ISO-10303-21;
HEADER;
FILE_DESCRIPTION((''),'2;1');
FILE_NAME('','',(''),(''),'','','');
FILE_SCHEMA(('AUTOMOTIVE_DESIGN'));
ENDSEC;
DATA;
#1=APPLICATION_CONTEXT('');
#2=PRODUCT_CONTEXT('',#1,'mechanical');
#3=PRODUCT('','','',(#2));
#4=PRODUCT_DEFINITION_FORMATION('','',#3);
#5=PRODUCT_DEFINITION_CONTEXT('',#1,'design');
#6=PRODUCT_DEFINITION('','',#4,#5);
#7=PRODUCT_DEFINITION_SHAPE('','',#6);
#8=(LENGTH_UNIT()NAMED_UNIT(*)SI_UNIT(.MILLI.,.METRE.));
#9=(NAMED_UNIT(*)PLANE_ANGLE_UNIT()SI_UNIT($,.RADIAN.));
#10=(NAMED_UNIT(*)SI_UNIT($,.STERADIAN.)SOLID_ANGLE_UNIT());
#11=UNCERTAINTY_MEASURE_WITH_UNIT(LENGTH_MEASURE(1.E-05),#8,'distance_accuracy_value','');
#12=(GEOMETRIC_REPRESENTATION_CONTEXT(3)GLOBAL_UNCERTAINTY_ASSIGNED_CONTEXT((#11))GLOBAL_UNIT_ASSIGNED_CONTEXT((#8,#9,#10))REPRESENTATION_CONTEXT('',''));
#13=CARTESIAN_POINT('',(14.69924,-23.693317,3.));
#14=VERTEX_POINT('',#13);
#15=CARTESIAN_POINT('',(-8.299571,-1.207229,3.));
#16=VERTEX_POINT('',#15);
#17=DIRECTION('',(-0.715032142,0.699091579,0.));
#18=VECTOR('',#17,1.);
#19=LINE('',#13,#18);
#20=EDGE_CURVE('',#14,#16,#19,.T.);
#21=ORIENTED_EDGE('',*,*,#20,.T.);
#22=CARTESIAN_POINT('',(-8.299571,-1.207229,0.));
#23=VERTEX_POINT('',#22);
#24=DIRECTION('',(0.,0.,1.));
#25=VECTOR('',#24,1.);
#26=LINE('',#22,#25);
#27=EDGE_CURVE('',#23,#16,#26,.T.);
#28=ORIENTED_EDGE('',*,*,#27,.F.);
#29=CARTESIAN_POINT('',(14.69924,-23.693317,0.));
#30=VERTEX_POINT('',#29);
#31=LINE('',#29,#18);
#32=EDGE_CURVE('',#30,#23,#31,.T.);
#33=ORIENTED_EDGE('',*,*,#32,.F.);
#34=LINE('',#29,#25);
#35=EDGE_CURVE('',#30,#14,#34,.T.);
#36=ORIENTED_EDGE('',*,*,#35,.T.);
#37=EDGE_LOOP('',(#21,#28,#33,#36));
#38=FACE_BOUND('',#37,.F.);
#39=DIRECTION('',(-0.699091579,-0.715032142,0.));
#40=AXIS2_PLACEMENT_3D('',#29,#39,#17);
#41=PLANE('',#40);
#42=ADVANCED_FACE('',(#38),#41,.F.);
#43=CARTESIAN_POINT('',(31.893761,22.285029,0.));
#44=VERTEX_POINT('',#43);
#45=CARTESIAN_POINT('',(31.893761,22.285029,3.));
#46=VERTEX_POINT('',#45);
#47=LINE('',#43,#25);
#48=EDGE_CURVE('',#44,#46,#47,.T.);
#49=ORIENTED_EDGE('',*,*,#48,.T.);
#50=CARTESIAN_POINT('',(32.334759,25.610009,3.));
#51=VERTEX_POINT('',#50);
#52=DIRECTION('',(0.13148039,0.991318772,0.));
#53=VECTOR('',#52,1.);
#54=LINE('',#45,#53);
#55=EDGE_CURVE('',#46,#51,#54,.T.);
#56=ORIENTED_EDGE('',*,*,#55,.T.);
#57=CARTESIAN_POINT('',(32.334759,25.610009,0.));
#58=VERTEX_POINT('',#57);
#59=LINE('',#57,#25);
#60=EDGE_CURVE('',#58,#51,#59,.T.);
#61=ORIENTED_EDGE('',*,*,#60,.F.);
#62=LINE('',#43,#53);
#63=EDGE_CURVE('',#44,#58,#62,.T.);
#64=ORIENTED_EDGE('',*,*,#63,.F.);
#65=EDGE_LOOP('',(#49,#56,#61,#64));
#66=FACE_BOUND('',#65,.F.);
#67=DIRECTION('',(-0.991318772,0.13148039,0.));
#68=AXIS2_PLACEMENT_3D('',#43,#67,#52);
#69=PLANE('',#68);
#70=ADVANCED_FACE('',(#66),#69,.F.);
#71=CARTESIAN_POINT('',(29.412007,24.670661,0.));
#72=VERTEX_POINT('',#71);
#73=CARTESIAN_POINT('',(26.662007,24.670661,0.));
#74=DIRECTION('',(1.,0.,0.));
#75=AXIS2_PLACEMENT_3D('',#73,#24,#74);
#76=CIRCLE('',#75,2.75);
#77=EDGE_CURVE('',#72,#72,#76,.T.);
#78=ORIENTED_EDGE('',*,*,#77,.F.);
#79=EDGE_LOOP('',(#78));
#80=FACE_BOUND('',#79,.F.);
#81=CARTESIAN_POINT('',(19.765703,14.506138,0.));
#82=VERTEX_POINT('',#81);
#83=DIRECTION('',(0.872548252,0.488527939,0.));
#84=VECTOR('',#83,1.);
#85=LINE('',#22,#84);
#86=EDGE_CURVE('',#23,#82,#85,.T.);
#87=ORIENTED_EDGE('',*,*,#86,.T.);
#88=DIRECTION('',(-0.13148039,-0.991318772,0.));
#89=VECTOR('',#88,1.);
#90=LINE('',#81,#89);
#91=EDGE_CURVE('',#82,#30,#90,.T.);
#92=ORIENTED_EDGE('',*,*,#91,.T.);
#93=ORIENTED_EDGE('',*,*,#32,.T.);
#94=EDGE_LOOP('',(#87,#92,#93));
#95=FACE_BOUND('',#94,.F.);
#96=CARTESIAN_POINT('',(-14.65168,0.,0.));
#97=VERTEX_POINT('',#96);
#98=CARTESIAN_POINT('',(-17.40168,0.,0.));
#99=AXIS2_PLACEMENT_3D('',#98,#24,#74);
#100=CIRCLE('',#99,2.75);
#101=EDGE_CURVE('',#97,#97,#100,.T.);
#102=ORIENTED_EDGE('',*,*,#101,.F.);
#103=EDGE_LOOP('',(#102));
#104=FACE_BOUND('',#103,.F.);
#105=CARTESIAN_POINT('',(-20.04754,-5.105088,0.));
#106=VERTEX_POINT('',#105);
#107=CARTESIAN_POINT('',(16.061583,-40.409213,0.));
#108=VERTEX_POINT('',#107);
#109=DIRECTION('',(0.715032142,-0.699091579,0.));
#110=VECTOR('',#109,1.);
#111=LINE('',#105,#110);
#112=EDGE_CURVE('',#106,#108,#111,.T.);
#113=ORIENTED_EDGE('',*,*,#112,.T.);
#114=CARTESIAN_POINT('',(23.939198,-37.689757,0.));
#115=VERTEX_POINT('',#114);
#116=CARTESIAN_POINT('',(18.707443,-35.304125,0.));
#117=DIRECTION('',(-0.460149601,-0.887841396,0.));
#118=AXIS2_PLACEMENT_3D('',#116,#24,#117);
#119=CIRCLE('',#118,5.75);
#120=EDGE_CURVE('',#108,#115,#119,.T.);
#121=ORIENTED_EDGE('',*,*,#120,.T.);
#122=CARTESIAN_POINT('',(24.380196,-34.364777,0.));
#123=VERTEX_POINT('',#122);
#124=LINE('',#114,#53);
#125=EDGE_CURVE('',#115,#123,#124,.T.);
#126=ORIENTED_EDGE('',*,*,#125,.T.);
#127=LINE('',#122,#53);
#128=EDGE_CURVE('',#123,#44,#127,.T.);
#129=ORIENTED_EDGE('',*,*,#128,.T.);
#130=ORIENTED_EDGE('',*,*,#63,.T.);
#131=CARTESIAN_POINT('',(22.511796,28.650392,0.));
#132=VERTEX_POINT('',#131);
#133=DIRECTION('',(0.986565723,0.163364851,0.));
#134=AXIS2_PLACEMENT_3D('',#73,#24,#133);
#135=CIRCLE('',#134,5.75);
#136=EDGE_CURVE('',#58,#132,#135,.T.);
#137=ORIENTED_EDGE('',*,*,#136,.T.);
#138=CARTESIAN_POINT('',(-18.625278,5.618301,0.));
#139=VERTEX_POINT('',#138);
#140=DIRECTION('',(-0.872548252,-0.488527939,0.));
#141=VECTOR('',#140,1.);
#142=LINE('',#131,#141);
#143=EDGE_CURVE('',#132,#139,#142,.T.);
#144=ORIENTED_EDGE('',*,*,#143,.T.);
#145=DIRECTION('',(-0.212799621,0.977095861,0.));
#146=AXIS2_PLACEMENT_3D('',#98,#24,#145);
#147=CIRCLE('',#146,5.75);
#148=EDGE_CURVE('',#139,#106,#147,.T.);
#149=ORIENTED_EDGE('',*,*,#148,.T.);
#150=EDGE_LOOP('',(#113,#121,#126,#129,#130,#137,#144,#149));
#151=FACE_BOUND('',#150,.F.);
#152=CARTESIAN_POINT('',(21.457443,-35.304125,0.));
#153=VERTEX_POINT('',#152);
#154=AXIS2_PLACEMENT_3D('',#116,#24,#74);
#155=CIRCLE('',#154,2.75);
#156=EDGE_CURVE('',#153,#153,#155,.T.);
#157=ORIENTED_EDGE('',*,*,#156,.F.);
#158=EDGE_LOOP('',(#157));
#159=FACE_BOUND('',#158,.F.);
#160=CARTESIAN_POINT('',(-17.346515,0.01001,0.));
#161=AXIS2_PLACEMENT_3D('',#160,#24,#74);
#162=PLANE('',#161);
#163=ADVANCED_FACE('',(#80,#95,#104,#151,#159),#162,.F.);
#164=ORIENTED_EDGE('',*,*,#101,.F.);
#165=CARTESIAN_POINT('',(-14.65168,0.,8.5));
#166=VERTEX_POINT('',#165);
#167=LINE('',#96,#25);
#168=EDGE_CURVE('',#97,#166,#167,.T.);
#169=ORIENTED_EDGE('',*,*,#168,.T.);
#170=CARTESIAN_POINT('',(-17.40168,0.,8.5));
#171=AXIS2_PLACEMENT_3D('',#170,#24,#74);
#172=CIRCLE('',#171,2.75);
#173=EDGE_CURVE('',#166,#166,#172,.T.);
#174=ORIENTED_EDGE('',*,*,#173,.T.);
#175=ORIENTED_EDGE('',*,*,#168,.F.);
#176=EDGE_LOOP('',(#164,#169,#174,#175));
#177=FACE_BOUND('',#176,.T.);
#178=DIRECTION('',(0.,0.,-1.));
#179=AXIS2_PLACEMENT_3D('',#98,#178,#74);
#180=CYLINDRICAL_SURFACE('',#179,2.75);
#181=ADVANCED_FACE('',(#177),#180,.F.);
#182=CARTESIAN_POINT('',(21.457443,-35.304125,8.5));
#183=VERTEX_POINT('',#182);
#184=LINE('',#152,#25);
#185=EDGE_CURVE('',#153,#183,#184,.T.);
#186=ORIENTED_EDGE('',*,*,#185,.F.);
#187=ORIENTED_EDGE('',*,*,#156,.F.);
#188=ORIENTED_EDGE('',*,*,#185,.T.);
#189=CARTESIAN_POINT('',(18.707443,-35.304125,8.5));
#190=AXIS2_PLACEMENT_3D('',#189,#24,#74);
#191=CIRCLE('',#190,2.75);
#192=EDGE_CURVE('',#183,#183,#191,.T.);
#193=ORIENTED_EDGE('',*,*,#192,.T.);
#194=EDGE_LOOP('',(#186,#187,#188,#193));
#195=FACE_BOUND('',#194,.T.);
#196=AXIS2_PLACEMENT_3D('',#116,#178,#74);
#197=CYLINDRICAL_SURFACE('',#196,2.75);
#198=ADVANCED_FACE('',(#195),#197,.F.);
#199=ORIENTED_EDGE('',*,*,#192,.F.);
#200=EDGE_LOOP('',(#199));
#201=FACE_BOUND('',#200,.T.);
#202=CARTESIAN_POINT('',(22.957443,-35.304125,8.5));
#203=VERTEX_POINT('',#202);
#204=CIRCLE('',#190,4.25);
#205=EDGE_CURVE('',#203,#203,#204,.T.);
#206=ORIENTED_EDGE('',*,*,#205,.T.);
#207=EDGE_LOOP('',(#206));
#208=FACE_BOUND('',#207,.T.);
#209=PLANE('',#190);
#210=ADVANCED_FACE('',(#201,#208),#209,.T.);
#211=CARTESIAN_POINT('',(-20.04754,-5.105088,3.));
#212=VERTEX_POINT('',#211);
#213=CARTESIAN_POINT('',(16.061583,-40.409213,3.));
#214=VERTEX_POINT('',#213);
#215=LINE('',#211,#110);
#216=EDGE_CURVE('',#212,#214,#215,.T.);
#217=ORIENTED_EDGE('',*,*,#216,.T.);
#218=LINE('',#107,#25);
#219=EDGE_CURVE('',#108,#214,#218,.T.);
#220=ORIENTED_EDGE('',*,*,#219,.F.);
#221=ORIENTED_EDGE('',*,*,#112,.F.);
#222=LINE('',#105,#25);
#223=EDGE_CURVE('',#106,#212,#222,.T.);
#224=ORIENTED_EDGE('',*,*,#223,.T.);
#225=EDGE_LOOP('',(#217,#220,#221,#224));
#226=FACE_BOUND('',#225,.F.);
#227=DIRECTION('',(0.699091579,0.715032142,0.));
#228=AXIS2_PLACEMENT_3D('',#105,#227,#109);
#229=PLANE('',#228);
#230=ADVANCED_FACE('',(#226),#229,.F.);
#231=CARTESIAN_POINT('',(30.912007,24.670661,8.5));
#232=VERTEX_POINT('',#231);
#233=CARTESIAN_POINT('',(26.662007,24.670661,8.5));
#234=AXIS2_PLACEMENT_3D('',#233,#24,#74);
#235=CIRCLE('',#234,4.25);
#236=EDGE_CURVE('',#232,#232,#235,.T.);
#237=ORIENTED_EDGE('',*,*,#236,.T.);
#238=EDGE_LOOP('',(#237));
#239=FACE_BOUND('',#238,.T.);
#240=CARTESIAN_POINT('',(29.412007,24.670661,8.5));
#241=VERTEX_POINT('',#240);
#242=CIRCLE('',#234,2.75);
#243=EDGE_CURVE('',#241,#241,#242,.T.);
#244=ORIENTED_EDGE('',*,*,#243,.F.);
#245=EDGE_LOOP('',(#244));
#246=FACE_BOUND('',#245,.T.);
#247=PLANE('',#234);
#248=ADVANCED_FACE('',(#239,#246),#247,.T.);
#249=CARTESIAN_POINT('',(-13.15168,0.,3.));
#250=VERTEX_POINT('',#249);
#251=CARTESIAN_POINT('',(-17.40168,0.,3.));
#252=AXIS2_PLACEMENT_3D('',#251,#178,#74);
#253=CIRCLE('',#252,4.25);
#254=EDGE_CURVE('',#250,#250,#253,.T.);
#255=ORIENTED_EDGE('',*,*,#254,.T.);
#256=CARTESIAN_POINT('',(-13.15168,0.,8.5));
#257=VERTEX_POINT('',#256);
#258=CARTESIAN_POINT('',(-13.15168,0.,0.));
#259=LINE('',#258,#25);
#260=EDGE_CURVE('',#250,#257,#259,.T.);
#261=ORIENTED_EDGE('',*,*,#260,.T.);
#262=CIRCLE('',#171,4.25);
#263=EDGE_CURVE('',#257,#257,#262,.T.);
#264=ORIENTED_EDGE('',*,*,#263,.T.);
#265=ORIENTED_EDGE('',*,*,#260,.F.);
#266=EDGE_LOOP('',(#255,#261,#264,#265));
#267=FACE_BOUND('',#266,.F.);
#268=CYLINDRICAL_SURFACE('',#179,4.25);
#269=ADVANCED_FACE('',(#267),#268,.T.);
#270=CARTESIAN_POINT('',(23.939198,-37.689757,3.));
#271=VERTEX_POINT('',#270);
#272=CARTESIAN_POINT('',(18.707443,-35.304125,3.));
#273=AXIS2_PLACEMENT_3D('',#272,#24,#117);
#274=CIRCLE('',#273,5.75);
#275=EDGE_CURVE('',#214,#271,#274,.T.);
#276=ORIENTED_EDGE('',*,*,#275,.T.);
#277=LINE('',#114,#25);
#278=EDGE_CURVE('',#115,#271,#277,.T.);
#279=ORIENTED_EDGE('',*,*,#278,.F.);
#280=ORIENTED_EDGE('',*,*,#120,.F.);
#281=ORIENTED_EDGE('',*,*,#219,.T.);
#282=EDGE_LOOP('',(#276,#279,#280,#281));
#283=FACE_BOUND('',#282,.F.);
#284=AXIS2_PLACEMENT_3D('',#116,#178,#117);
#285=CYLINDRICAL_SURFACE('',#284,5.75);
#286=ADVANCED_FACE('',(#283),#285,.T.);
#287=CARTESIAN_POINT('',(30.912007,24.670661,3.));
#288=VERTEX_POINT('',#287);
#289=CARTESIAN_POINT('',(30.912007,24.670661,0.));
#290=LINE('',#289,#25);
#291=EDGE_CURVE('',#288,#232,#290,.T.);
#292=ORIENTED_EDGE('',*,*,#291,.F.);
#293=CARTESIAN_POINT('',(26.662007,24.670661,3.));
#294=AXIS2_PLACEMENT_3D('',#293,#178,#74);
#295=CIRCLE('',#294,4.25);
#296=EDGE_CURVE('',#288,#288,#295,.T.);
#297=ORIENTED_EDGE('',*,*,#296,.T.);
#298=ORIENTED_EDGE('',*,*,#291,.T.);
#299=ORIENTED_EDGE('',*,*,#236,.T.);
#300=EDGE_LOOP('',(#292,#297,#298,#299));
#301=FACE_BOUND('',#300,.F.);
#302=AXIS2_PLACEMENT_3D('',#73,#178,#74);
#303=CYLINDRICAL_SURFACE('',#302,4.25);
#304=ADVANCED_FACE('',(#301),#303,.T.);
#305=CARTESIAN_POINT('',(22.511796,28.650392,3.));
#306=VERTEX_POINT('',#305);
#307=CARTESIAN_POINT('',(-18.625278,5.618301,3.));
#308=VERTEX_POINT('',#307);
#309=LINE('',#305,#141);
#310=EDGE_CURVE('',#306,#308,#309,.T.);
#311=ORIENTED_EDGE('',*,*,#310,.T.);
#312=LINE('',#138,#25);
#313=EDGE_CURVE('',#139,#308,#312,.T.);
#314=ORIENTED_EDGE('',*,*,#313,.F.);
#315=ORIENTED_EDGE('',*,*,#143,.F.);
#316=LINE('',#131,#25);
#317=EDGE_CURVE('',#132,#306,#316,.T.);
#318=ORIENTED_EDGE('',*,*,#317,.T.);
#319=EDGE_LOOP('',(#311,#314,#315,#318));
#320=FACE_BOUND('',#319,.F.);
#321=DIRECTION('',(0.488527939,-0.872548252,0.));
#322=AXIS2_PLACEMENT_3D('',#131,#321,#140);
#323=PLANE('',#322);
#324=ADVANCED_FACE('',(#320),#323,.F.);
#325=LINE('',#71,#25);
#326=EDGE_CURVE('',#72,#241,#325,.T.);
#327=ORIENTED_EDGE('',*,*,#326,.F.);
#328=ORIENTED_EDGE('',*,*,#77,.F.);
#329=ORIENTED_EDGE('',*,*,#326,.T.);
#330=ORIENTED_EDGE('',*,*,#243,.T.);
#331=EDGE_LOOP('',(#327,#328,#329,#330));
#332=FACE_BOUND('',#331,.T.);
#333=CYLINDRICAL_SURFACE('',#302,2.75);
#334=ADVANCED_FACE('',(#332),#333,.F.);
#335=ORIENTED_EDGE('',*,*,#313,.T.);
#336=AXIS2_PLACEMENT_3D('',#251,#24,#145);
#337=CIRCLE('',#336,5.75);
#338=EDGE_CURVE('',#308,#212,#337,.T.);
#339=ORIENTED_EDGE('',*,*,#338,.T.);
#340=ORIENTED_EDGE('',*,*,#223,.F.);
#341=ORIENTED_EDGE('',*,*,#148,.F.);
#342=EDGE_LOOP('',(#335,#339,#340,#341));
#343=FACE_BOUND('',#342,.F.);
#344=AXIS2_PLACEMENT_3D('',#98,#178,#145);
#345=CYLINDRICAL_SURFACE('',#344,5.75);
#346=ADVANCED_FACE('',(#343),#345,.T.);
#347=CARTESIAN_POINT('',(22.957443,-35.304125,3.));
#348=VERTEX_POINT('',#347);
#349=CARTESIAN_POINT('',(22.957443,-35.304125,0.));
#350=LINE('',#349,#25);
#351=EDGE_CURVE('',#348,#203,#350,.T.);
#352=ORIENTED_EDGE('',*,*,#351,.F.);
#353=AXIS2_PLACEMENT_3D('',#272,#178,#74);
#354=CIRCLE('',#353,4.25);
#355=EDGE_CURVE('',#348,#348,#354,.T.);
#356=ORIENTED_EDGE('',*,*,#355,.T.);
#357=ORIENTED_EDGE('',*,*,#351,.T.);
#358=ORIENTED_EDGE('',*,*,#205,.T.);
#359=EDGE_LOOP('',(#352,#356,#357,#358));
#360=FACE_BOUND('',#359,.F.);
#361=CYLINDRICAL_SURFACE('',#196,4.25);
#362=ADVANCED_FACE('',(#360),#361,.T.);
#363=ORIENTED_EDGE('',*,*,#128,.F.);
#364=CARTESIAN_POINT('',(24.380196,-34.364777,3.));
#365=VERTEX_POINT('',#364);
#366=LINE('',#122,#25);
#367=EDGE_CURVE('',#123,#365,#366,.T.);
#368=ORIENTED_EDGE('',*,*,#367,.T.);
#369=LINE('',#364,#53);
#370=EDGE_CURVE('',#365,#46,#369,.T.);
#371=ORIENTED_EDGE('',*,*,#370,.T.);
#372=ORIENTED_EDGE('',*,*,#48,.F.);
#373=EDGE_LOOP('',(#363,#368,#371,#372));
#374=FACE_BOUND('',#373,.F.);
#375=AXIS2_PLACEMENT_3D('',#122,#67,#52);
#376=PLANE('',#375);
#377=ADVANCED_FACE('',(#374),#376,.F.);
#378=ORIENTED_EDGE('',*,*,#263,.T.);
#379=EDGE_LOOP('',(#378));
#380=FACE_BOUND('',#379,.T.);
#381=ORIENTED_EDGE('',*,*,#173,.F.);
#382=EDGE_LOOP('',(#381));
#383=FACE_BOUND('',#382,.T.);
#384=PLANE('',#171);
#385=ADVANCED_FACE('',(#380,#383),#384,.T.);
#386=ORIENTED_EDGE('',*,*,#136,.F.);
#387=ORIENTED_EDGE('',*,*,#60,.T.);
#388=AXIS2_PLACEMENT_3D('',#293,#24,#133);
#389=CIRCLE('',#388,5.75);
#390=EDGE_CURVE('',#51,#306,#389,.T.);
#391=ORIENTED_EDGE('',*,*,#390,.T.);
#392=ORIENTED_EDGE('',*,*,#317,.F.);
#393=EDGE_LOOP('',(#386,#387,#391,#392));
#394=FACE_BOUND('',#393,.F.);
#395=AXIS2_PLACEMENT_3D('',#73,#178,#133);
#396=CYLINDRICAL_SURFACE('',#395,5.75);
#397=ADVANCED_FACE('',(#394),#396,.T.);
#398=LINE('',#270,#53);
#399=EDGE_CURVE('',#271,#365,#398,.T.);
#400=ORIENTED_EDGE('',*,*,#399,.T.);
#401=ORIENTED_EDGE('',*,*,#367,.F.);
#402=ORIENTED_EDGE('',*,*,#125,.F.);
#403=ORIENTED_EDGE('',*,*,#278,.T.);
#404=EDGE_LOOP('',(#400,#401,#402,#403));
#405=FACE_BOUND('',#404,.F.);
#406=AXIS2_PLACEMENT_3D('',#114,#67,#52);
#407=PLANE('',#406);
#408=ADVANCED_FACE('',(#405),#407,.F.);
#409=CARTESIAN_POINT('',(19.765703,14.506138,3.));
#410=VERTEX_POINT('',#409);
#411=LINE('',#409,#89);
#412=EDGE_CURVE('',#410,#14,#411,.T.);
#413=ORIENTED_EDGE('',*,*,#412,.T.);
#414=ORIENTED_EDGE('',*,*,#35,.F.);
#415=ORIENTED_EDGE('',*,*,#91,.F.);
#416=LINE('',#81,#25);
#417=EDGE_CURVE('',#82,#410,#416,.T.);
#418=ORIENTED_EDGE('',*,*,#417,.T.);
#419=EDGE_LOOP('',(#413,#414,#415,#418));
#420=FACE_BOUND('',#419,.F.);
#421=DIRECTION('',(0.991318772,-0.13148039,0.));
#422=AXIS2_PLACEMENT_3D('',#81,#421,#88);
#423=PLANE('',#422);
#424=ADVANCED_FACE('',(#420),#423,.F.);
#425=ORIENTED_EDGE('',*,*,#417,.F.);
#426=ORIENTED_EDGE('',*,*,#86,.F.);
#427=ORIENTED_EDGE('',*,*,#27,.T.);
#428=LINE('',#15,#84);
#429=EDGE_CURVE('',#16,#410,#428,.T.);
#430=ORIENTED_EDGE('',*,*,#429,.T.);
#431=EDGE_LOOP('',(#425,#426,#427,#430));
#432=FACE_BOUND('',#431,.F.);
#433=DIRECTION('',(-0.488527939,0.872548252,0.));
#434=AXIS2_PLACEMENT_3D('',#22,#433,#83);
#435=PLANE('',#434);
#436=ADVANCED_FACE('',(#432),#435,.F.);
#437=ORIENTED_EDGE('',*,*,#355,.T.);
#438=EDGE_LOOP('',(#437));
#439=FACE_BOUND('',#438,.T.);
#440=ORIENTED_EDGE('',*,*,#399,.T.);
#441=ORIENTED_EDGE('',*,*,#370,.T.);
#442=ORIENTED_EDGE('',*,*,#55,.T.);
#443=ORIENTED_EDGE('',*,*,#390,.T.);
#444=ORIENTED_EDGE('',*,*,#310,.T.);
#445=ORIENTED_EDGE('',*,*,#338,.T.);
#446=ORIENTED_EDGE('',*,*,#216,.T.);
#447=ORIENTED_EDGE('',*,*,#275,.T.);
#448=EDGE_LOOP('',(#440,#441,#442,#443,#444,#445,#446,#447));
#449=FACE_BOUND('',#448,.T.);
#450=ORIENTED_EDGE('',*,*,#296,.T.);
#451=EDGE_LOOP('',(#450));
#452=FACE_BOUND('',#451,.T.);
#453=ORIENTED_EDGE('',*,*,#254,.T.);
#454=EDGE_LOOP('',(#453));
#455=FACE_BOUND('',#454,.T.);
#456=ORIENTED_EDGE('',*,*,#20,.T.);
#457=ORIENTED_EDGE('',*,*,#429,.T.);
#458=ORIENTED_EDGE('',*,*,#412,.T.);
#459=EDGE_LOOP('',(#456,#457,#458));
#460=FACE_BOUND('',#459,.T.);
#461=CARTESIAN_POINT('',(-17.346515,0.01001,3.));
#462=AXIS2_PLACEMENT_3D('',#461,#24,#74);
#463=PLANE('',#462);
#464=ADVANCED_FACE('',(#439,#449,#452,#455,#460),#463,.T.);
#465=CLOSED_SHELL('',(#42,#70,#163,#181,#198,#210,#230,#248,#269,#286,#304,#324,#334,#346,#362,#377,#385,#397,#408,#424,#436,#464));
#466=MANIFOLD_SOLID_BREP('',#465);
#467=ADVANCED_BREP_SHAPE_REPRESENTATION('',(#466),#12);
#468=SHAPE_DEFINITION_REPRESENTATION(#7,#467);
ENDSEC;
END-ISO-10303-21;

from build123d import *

# Parameters (mm, degrees)
F0_R     = 4.25
F0_R_2   = 2.75
F1_DEPTH = 3
F2_DEPTH = 8.5


# Not quite as in the source:
# - a feature names something its author has since deleted; it is built from what else it names


with BuildPart() as f1:
    # F0 (on Top) → F1 (new body)
    with BuildSketch(Plane.XY):
        with BuildLine():
            ThreePointArc((-20.0475404255, -5.1050880284), (-14.4143064726, -4.9130538455), (-11.6516802209, 0))
            ThreePointArc((-11.6516802209, 0), (-13.7942703105, 4.4776214376), (-18.6252780431, 5.6183011996))
            ThreePointArc((-18.6252780431, 5.6183011996), (-23.1017631579, 0.7560122426), (-20.0475404255, -5.1050880284))
        make_face()
        with Locations((-17.4016802209, 0)):
            Circle(F0_R, mode=Mode.SUBTRACT)
        with BuildLine():
            ThreePointArc((-18.6252780431, 5.6183011996), (-13.7942703105, 4.4776214376), (-11.6516802209, 0))
            ThreePointArc((-11.6516802209, 0), (-14.4143064726, -4.9130538455), (-20.0475404255, -5.1050880284))
            Line((-20.0475404255, -5.1050880284), (13.6632948995, -38.0643911727))
            ThreePointArc((13.6632948995, -38.0643911727), (16.8311240547, -29.8688761508), (24.3801958358, -34.3647768698))
            Line((24.3801958358, -34.3647768698), (31.8937613277, 22.2850285764))
            ThreePointArc((31.8937613277, 22.2850285764), (23.4337103416, 19.9124465773), (22.5117964167, 28.6503915729))
            Line((22.5117964167, 28.6503915729), (-18.6252780431, 5.6183011996))
        make_face()
        Polygon((14.6992403306, -23.6933170767), (-8.2995714993, -1.2072290356), (19.7657026362, 14.5061375255), align=None, mode=Mode.SUBTRACT)
        with BuildLine():
            ThreePointArc((32.3347594316, 25.6100088156), (28.3621582746, 30.1635639823), (22.5117964167, 28.6503915729))
            ThreePointArc((22.5117964167, 28.6503915729), (23.4337103416, 19.9124465773), (31.8937613277, 22.2850285764))
            Line((31.8937613277, 22.2850285764), (32.3347594316, 25.6100088156))
        make_face()
        with Locations((26.6620065254, 24.670660922)):
            Circle(F0_R, mode=Mode.SUBTRACT)
        with BuildLine():
            ThreePointArc((24.3801958358, -34.3647768698), (16.8311240547, -29.8688761508), (13.6632948995, -38.0643911727))
            Line((13.6632948995, -38.0643911727), (16.0615827249, -40.4092127917))
            ThreePointArc((16.0615827249, -40.4092127917), (20.5837618045, -40.7393733758), (23.9391977319, -37.6897571089))
            Line((23.9391977319, -37.6897571089), (24.3801958358, -34.3647768698))
        make_face()
        with Locations((18.7074429296, -35.3041247633)):
            Circle(F0_R, mode=Mode.SUBTRACT)
        with Locations((-17.4016802209, 0)):
            Circle(F0_R)
        with Locations((-17.4016802209, 0)):
            Circle(F0_R_2, mode=Mode.SUBTRACT)
        with Locations((26.6620065254, 24.670660922)):
            Circle(F0_R)
        with Locations((26.6620065254, 24.670660922)):
            Circle(F0_R_2, mode=Mode.SUBTRACT)
        with Locations((18.7074429296, -35.3041247633)):
            Circle(F0_R)
        with Locations((18.7074429296, -35.3041247633)):
            Circle(F0_R_2, mode=Mode.SUBTRACT)
    extrude(amount=F1_DEPTH)

    # F0 (on Top) → F2 (join)
    with BuildSketch(Plane.XY):
        with Locations((26.6620065254, 24.670660922)):
            Circle(F0_R)
        with Locations((26.6620065254, 24.670660922)):
            Circle(F0_R_2, mode=Mode.SUBTRACT)
        with Locations((-17.4016802209, 0)):
            Circle(F0_R)
        with Locations((-17.4016802209, 0)):
            Circle(F0_R_2, mode=Mode.SUBTRACT)
        with Locations((18.7074429296, -35.3041247633)):
            Circle(F0_R)
        with Locations((18.7074429296, -35.3041247633)):
            Circle(F0_R_2, mode=Mode.SUBTRACT)
    extrude(amount=F2_DEPTH)


solid = f1.part
